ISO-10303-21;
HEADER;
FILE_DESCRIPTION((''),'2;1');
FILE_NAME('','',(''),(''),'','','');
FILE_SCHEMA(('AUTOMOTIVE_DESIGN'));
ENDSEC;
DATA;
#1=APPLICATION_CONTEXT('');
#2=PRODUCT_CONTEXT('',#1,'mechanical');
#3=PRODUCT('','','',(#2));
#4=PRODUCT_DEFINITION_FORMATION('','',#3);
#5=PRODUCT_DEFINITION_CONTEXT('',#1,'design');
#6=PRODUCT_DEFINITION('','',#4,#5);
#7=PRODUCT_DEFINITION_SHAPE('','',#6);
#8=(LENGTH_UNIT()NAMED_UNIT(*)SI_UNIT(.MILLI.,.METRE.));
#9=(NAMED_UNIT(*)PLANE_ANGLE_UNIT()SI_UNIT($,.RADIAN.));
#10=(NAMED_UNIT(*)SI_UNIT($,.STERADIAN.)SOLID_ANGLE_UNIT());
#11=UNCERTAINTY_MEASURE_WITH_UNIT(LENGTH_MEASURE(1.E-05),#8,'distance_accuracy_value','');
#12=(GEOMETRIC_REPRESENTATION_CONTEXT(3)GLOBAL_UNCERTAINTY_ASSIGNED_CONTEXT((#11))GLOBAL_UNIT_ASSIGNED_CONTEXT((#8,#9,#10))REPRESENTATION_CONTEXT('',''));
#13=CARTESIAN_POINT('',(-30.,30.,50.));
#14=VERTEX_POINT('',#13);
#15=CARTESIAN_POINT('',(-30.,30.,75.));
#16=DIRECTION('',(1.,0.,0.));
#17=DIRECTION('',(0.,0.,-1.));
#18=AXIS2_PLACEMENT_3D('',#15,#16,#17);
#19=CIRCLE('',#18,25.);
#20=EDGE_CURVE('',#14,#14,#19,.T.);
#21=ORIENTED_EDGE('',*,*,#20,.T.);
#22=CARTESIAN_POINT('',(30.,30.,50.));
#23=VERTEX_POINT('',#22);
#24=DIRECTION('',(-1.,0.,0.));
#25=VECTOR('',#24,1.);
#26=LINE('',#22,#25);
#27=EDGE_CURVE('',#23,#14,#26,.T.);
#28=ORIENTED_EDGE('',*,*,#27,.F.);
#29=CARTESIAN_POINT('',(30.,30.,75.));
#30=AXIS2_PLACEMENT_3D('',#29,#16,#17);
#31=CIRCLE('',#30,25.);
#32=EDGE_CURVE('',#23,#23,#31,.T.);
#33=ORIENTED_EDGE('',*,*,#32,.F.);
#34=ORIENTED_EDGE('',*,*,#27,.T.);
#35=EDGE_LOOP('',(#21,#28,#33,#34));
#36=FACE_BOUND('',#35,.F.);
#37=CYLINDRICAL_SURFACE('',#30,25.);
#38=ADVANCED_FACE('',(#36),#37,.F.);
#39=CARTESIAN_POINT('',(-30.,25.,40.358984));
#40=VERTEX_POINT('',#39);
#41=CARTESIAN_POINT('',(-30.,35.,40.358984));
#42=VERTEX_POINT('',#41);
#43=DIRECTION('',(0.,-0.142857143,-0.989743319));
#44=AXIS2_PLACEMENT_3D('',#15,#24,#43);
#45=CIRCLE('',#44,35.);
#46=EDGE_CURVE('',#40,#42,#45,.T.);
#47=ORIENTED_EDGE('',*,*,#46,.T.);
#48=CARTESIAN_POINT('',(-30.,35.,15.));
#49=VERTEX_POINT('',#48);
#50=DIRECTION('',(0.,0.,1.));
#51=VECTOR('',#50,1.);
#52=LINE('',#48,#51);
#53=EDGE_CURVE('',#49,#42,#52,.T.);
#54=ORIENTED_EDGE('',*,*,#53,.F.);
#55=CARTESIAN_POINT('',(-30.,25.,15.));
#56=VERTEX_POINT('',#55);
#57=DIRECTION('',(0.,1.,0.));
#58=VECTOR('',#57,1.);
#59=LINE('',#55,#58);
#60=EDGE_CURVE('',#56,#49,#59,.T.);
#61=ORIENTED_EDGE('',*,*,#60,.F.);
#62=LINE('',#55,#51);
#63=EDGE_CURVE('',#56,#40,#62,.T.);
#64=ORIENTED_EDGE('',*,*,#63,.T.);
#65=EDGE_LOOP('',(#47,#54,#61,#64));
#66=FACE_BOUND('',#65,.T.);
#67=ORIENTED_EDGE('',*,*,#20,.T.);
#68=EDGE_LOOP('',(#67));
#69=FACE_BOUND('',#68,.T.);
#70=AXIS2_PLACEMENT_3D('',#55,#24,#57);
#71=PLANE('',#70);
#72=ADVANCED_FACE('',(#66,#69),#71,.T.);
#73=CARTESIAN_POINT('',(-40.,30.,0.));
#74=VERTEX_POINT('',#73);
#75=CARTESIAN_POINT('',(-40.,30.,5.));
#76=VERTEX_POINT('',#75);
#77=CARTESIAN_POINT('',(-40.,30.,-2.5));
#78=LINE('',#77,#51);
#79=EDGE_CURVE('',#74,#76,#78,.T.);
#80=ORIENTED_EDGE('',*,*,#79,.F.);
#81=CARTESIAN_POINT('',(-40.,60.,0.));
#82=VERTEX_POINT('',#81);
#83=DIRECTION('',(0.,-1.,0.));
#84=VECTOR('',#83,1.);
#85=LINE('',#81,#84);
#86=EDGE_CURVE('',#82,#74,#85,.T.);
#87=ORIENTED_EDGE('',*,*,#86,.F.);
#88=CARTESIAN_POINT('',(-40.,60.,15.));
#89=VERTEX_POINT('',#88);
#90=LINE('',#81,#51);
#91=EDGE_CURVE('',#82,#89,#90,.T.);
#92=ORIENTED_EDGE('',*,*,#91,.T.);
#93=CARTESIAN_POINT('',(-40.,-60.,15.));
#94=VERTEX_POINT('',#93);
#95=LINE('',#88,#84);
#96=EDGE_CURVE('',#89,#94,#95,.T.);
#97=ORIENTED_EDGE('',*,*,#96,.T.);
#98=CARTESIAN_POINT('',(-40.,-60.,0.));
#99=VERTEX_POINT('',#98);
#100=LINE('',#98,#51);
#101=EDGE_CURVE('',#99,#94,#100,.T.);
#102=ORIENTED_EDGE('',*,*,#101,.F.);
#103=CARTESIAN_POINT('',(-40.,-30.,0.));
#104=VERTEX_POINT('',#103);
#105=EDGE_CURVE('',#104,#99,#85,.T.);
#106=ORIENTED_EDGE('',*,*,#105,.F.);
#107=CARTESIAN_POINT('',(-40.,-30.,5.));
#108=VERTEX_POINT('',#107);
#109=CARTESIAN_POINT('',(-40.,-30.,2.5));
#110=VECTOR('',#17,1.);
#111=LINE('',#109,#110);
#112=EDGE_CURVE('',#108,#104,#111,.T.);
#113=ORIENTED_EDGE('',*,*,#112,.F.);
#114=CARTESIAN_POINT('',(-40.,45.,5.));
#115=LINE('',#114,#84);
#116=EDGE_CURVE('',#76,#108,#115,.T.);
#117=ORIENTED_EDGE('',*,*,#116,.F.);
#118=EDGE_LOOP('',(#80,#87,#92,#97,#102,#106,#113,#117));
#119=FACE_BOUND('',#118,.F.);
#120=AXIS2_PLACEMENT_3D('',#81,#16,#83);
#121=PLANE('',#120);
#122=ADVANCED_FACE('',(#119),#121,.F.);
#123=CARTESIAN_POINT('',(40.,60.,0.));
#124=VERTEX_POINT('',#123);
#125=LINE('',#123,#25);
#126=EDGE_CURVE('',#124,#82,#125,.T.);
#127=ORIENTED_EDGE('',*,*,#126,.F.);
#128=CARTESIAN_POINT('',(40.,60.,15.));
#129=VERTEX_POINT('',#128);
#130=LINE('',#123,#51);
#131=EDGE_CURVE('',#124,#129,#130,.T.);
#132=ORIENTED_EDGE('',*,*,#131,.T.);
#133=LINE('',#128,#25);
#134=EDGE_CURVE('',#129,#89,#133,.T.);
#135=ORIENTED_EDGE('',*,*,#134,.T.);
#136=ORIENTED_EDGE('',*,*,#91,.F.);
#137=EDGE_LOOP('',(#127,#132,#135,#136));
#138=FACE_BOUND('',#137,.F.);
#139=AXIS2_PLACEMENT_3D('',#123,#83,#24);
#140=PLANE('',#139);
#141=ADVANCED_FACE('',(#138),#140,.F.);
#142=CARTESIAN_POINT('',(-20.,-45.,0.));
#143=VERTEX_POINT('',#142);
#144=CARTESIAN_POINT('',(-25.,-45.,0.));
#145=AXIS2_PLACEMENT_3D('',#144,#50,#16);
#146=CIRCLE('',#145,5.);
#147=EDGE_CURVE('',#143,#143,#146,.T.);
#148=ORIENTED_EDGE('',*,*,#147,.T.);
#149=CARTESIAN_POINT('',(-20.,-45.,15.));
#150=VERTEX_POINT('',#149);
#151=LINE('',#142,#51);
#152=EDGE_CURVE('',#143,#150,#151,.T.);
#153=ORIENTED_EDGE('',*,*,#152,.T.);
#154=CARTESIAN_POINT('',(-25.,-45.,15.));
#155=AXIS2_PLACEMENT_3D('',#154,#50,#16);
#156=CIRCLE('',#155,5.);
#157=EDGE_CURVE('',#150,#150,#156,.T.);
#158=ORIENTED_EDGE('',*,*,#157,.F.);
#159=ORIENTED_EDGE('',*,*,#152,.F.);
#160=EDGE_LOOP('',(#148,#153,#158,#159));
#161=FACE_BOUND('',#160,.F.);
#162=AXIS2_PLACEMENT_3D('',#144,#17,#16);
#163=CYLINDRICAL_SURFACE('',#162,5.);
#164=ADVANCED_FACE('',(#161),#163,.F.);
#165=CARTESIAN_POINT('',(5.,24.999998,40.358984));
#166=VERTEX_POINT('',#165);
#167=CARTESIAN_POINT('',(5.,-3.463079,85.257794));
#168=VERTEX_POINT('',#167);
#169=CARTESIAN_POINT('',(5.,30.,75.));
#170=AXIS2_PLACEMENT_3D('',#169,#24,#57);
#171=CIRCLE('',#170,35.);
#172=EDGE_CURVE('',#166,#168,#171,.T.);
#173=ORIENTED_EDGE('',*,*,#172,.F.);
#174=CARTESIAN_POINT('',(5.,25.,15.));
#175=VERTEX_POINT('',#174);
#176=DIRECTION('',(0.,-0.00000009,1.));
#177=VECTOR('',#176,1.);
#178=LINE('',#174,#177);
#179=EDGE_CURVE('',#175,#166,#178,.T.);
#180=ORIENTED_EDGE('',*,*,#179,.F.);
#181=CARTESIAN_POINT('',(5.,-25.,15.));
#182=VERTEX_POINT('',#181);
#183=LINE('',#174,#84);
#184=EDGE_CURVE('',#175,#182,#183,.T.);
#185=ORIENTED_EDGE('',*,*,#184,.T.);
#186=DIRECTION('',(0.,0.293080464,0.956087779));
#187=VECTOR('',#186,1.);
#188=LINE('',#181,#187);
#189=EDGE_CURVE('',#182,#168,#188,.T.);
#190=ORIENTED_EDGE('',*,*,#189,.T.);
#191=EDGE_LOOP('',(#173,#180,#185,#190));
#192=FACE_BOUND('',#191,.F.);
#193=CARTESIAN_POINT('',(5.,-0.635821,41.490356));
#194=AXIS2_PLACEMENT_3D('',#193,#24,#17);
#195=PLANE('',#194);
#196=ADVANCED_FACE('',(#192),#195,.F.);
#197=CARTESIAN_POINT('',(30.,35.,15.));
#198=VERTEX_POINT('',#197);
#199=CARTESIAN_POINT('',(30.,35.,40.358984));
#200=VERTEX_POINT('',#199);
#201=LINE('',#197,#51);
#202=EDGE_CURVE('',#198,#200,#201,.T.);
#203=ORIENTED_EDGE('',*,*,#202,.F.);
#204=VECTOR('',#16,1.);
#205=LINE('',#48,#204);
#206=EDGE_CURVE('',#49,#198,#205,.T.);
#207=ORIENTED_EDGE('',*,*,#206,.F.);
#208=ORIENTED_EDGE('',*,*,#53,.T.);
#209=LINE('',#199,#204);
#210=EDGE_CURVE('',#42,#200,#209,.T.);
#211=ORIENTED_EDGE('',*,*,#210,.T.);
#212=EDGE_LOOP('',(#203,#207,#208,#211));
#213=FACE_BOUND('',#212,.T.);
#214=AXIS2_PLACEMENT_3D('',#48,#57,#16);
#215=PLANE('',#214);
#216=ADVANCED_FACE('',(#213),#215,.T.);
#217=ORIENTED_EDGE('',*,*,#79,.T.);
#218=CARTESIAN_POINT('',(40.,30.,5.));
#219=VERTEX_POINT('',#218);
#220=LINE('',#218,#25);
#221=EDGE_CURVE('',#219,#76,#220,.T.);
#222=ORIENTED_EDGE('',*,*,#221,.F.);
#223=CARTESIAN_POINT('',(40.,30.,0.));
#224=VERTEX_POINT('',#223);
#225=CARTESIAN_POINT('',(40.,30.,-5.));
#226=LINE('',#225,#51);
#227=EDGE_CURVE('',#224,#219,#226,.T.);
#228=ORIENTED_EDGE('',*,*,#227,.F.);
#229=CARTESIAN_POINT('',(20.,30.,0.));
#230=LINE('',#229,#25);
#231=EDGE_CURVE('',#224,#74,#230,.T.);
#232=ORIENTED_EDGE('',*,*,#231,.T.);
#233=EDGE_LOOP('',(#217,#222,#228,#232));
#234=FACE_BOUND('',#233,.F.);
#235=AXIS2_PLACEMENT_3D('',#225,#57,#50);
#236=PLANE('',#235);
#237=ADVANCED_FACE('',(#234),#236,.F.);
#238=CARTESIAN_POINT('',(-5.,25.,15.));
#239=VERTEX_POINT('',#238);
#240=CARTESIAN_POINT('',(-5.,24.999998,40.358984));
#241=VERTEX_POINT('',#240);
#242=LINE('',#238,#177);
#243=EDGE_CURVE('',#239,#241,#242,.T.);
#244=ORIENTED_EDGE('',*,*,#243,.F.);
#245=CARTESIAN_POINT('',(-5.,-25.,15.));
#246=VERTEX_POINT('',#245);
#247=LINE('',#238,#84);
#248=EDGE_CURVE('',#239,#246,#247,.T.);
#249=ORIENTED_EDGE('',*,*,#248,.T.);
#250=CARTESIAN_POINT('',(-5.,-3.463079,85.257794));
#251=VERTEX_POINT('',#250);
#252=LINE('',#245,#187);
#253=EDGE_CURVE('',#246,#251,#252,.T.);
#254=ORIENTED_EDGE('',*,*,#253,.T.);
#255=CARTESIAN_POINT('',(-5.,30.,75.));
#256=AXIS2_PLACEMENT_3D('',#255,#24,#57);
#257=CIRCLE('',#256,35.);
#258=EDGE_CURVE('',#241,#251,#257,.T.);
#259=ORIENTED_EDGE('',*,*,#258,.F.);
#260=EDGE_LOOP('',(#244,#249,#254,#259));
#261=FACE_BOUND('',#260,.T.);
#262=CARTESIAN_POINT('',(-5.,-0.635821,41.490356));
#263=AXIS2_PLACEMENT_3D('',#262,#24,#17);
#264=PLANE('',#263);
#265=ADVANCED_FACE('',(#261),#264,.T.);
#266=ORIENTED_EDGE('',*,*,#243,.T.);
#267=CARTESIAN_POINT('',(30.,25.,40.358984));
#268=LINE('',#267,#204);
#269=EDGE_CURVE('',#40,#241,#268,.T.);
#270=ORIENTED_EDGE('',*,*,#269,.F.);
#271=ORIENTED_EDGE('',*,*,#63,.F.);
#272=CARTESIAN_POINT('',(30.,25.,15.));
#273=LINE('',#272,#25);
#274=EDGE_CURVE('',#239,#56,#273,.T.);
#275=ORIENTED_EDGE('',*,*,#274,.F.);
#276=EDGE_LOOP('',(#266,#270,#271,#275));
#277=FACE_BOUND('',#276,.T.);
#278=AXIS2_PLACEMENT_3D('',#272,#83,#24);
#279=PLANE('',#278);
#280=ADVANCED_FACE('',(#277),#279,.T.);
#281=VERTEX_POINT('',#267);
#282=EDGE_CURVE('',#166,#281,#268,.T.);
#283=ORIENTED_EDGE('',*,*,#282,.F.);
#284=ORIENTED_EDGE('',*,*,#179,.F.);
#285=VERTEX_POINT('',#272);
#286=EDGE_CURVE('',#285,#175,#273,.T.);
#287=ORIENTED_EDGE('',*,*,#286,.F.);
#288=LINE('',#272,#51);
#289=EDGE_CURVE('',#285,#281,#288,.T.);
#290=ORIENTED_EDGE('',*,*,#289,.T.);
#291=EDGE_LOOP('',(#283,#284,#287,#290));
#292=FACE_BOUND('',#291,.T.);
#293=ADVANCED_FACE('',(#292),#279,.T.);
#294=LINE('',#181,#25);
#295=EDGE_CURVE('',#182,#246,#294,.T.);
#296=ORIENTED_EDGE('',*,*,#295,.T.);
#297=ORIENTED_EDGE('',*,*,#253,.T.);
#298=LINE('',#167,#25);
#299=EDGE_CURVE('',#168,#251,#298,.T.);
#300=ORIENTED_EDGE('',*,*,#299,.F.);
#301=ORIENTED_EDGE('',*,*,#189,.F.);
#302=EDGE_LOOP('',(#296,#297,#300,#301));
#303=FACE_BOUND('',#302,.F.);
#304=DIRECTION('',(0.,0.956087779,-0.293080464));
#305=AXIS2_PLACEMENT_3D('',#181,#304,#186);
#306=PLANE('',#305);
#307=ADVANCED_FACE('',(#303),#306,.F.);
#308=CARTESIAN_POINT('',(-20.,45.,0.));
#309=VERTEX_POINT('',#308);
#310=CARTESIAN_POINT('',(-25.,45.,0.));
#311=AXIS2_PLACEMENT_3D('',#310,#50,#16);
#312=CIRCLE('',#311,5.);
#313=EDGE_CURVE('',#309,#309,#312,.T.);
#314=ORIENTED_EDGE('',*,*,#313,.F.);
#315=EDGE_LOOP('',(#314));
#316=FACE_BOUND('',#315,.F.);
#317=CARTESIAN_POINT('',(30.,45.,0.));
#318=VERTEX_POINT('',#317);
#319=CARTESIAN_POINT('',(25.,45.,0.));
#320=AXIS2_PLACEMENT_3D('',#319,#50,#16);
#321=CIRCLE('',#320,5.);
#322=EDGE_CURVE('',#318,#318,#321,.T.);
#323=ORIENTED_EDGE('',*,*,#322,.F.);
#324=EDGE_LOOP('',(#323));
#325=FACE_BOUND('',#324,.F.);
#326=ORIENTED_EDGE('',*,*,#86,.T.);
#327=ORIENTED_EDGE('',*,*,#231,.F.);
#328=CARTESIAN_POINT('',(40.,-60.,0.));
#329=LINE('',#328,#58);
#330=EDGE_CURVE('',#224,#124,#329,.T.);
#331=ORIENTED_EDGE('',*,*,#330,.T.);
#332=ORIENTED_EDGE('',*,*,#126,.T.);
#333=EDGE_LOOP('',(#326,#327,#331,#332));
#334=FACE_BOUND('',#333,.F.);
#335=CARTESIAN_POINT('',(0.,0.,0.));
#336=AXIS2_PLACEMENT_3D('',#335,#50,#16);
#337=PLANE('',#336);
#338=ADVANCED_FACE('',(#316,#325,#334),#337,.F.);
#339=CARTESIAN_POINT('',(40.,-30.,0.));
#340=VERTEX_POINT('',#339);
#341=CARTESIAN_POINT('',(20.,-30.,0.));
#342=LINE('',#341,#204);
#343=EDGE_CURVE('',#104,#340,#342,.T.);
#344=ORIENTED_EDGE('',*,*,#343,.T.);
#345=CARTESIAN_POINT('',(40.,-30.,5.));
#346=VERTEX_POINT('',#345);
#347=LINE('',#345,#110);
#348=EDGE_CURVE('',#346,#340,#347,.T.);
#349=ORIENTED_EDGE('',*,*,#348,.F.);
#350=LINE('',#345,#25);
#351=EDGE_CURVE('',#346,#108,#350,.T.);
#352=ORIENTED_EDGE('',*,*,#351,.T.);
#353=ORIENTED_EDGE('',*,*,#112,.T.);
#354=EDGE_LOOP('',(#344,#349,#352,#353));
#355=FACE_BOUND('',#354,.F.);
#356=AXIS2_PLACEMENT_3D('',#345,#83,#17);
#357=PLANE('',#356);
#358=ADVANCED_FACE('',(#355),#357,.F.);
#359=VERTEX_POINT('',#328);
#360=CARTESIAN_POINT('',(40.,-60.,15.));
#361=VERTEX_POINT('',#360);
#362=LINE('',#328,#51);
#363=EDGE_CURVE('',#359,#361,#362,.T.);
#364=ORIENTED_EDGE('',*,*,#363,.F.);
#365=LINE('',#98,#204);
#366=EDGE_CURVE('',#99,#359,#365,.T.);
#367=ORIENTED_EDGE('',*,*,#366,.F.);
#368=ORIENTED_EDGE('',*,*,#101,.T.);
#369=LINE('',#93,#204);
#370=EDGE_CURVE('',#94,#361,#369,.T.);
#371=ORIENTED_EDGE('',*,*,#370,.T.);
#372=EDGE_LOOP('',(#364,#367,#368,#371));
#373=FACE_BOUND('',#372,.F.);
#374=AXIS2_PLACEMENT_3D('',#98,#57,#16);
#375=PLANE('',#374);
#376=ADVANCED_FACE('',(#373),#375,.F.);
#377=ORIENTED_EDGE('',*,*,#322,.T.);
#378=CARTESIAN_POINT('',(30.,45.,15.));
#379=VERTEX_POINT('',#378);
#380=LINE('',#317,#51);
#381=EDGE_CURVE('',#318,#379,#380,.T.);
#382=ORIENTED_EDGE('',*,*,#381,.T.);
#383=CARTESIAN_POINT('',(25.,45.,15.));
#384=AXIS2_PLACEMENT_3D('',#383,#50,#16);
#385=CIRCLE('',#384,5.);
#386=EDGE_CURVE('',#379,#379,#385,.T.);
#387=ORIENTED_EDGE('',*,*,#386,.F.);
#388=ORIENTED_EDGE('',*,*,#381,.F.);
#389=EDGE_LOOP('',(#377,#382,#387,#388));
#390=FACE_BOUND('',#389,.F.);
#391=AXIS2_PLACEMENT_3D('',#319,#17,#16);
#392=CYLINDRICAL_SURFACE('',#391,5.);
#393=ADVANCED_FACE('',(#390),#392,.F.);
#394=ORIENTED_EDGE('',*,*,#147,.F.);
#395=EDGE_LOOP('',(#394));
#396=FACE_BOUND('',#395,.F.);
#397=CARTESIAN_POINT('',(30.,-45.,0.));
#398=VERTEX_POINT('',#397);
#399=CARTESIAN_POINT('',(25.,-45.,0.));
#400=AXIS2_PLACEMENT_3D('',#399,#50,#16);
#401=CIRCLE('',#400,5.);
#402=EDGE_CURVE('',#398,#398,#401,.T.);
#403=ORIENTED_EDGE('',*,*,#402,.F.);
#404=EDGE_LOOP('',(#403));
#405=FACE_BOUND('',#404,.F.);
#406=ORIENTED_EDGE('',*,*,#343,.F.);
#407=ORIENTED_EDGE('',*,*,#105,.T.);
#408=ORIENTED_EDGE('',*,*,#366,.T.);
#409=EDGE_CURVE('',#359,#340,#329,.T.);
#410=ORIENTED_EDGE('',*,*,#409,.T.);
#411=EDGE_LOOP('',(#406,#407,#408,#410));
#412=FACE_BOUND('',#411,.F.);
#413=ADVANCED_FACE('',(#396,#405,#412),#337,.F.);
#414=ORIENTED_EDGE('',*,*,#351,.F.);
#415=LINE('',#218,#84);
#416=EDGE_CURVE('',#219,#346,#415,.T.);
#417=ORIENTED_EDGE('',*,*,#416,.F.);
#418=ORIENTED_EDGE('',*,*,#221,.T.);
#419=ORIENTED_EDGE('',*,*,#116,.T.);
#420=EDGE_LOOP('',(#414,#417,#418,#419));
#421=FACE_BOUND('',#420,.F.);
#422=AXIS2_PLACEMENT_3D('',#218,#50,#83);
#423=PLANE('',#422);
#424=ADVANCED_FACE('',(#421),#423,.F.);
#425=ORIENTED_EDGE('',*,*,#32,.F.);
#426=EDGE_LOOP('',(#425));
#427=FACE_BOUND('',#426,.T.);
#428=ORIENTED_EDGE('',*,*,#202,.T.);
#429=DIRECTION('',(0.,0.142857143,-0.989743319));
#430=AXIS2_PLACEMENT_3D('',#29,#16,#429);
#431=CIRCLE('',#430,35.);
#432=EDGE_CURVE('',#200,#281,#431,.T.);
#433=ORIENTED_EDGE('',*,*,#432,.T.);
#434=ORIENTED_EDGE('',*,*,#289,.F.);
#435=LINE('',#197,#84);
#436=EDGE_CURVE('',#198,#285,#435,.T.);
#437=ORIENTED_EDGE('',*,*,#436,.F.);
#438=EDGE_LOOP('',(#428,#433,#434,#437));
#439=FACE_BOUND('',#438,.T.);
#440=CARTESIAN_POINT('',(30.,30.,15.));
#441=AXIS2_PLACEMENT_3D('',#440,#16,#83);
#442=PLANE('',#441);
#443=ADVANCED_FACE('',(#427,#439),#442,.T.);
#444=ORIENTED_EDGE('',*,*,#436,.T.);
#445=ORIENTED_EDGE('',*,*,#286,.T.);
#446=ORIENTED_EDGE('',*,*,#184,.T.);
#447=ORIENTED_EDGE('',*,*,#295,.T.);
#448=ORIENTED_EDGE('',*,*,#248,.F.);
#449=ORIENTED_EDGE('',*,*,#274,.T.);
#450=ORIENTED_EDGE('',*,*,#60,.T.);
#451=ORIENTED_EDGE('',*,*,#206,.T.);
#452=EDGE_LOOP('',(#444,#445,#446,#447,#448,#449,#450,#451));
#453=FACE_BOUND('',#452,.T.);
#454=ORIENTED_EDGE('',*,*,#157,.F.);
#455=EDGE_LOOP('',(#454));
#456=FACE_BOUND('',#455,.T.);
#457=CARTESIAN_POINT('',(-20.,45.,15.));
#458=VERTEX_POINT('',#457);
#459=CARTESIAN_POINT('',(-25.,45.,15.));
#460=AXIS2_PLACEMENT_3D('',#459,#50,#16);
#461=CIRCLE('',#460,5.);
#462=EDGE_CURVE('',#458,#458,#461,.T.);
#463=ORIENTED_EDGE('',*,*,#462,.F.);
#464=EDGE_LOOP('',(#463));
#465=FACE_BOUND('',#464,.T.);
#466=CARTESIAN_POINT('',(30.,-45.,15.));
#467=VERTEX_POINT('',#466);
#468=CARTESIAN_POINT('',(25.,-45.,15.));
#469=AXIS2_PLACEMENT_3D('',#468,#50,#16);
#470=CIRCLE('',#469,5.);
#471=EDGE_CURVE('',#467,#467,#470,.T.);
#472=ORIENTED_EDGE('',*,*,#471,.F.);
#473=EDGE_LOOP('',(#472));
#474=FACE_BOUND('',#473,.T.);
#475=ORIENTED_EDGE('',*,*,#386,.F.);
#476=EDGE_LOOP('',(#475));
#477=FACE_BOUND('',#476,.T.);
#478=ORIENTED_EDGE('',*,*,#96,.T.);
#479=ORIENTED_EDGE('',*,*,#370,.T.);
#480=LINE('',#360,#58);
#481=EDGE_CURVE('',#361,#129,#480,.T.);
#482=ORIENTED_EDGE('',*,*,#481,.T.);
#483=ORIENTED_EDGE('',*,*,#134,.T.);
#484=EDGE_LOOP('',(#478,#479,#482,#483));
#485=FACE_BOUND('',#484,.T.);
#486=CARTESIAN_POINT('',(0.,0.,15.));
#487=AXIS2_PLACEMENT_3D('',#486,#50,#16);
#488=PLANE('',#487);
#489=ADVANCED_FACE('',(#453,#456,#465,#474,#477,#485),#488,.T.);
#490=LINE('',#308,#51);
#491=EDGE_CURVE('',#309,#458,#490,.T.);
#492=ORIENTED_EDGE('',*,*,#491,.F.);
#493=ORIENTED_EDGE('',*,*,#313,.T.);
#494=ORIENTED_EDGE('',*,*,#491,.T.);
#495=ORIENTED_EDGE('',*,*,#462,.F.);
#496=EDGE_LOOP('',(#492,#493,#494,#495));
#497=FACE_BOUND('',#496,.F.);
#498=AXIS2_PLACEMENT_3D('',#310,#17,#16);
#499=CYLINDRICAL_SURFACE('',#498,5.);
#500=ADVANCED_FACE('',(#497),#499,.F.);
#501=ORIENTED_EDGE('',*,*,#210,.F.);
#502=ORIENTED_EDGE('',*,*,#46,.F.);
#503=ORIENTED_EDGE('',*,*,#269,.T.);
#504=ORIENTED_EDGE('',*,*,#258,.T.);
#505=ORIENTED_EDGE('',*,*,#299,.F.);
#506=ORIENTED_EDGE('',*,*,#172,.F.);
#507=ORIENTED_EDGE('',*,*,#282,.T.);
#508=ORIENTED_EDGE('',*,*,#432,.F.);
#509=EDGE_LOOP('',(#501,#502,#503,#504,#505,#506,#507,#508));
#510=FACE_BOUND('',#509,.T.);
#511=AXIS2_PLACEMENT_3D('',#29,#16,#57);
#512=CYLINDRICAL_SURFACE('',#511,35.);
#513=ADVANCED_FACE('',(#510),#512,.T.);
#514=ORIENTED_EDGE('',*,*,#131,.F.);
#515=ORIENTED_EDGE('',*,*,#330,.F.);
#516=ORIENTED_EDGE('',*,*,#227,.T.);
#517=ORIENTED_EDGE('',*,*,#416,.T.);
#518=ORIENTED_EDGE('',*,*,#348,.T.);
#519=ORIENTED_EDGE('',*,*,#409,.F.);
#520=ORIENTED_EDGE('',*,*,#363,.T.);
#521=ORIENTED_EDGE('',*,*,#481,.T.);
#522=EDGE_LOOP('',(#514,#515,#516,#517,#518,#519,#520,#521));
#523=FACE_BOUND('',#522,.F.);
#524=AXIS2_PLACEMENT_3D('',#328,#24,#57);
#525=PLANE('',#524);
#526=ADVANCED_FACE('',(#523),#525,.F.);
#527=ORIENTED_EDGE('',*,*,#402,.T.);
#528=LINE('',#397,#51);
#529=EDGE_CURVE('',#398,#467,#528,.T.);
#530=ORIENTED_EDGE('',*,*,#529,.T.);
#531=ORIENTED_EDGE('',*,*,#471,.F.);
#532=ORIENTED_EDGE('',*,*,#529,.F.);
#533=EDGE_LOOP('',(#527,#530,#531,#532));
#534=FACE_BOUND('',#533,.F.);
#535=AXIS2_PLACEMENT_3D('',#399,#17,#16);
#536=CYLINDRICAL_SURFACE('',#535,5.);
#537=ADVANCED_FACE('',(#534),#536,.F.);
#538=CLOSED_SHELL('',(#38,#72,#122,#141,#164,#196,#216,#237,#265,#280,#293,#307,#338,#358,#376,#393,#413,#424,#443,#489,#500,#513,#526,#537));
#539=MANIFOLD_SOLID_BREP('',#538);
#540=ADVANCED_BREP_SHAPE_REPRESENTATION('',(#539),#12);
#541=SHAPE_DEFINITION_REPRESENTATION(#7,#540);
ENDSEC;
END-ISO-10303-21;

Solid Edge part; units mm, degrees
sketch "Sketch1" plane through (0, 0, 0) normal (0, 0, 1) x (1, 0, 0)
  line L0 (-40, 60) -> (-40, -60)
  line L1 (-40, -60) -> (40, -60)
  line L2 (40, -60) -> (40, 60)
  line L3 (40, 60) -> (-40, 60)
  circle A0 centre (-25, -45) radius 5
  circle A1 centre (25, -45) radius 5
  circle A2 centre (25, 45) radius 5
  circle A3 centre (-25, 45) radius 5
extrude "Protrusion1" add sketch "Sketch1" along normal blind 15
sketch "Sketch2" plane through (40, 0, 7.5) normal (1, 0, 0) x (0, 1, 0)
  line L0 (30, -2.5) -> (-30, -2.5)
  line L1 (-30, -2.5) -> (-30, -12.5)
  line L2 (-30, -12.5) -> (30, -12.5)
  line L3 (30, -12.5) -> (30, -2.5)
extrude "ExtrudedCutout_1" cut sketch "Sketch2" against normal blind 91.8481
sketch "Sketch3" plane through (30, 0, 7.5) normal (1, 0, 0) x (0, 1, 0)
  circle A0 centre (30, 67.5) radius 35
extrude "ExtrudedProtrusion_3" add sketch "Sketch3" against normal blind 60
sketch "Sketch4" plane through (0, 0, 15) normal (0, 0, 1) x (0, 1, 0)
  line L0 (35, -30) -> (30, -30)
  line L1 (30, -30) -> (25, -30)
  line L2 (25, -30) -> (25, 30)
  line L3 (25, 30) -> (35, 30)
  line L4 (35, 30) -> (35, -30)
extrude "Protrusion2" add sketch "Sketch4" along normal up to vertex (60 mm away)
sketch "Sketch5" plane through (5, 0, 7.5) normal (1, 0, 0) x (0, 1, 0)
  line L0 (-25, 7.5) -> (-3.4631, 77.7578)
  line L1 (25, 7.5) -> (25, 32.859)
  line L2 (25, 7.5) -> (-25, 7.5)
  arc A0 (25, 32.859) -> (-3.4631, 77.7578) centre (30, 67.5) cw
extrude "ExtrudedProtrusion_5" add sketch "Sketch5" against normal blind 10
sketch "Sketch6" plane through (30, 30, 62.5) normal (1, 0, 0) x (0, 0, -1)
  circle A0 centre (-12.5, 0) radius 25
extrude "ExtrudedCutout_2" cut sketch "Sketch6" against normal blind 92.2155
